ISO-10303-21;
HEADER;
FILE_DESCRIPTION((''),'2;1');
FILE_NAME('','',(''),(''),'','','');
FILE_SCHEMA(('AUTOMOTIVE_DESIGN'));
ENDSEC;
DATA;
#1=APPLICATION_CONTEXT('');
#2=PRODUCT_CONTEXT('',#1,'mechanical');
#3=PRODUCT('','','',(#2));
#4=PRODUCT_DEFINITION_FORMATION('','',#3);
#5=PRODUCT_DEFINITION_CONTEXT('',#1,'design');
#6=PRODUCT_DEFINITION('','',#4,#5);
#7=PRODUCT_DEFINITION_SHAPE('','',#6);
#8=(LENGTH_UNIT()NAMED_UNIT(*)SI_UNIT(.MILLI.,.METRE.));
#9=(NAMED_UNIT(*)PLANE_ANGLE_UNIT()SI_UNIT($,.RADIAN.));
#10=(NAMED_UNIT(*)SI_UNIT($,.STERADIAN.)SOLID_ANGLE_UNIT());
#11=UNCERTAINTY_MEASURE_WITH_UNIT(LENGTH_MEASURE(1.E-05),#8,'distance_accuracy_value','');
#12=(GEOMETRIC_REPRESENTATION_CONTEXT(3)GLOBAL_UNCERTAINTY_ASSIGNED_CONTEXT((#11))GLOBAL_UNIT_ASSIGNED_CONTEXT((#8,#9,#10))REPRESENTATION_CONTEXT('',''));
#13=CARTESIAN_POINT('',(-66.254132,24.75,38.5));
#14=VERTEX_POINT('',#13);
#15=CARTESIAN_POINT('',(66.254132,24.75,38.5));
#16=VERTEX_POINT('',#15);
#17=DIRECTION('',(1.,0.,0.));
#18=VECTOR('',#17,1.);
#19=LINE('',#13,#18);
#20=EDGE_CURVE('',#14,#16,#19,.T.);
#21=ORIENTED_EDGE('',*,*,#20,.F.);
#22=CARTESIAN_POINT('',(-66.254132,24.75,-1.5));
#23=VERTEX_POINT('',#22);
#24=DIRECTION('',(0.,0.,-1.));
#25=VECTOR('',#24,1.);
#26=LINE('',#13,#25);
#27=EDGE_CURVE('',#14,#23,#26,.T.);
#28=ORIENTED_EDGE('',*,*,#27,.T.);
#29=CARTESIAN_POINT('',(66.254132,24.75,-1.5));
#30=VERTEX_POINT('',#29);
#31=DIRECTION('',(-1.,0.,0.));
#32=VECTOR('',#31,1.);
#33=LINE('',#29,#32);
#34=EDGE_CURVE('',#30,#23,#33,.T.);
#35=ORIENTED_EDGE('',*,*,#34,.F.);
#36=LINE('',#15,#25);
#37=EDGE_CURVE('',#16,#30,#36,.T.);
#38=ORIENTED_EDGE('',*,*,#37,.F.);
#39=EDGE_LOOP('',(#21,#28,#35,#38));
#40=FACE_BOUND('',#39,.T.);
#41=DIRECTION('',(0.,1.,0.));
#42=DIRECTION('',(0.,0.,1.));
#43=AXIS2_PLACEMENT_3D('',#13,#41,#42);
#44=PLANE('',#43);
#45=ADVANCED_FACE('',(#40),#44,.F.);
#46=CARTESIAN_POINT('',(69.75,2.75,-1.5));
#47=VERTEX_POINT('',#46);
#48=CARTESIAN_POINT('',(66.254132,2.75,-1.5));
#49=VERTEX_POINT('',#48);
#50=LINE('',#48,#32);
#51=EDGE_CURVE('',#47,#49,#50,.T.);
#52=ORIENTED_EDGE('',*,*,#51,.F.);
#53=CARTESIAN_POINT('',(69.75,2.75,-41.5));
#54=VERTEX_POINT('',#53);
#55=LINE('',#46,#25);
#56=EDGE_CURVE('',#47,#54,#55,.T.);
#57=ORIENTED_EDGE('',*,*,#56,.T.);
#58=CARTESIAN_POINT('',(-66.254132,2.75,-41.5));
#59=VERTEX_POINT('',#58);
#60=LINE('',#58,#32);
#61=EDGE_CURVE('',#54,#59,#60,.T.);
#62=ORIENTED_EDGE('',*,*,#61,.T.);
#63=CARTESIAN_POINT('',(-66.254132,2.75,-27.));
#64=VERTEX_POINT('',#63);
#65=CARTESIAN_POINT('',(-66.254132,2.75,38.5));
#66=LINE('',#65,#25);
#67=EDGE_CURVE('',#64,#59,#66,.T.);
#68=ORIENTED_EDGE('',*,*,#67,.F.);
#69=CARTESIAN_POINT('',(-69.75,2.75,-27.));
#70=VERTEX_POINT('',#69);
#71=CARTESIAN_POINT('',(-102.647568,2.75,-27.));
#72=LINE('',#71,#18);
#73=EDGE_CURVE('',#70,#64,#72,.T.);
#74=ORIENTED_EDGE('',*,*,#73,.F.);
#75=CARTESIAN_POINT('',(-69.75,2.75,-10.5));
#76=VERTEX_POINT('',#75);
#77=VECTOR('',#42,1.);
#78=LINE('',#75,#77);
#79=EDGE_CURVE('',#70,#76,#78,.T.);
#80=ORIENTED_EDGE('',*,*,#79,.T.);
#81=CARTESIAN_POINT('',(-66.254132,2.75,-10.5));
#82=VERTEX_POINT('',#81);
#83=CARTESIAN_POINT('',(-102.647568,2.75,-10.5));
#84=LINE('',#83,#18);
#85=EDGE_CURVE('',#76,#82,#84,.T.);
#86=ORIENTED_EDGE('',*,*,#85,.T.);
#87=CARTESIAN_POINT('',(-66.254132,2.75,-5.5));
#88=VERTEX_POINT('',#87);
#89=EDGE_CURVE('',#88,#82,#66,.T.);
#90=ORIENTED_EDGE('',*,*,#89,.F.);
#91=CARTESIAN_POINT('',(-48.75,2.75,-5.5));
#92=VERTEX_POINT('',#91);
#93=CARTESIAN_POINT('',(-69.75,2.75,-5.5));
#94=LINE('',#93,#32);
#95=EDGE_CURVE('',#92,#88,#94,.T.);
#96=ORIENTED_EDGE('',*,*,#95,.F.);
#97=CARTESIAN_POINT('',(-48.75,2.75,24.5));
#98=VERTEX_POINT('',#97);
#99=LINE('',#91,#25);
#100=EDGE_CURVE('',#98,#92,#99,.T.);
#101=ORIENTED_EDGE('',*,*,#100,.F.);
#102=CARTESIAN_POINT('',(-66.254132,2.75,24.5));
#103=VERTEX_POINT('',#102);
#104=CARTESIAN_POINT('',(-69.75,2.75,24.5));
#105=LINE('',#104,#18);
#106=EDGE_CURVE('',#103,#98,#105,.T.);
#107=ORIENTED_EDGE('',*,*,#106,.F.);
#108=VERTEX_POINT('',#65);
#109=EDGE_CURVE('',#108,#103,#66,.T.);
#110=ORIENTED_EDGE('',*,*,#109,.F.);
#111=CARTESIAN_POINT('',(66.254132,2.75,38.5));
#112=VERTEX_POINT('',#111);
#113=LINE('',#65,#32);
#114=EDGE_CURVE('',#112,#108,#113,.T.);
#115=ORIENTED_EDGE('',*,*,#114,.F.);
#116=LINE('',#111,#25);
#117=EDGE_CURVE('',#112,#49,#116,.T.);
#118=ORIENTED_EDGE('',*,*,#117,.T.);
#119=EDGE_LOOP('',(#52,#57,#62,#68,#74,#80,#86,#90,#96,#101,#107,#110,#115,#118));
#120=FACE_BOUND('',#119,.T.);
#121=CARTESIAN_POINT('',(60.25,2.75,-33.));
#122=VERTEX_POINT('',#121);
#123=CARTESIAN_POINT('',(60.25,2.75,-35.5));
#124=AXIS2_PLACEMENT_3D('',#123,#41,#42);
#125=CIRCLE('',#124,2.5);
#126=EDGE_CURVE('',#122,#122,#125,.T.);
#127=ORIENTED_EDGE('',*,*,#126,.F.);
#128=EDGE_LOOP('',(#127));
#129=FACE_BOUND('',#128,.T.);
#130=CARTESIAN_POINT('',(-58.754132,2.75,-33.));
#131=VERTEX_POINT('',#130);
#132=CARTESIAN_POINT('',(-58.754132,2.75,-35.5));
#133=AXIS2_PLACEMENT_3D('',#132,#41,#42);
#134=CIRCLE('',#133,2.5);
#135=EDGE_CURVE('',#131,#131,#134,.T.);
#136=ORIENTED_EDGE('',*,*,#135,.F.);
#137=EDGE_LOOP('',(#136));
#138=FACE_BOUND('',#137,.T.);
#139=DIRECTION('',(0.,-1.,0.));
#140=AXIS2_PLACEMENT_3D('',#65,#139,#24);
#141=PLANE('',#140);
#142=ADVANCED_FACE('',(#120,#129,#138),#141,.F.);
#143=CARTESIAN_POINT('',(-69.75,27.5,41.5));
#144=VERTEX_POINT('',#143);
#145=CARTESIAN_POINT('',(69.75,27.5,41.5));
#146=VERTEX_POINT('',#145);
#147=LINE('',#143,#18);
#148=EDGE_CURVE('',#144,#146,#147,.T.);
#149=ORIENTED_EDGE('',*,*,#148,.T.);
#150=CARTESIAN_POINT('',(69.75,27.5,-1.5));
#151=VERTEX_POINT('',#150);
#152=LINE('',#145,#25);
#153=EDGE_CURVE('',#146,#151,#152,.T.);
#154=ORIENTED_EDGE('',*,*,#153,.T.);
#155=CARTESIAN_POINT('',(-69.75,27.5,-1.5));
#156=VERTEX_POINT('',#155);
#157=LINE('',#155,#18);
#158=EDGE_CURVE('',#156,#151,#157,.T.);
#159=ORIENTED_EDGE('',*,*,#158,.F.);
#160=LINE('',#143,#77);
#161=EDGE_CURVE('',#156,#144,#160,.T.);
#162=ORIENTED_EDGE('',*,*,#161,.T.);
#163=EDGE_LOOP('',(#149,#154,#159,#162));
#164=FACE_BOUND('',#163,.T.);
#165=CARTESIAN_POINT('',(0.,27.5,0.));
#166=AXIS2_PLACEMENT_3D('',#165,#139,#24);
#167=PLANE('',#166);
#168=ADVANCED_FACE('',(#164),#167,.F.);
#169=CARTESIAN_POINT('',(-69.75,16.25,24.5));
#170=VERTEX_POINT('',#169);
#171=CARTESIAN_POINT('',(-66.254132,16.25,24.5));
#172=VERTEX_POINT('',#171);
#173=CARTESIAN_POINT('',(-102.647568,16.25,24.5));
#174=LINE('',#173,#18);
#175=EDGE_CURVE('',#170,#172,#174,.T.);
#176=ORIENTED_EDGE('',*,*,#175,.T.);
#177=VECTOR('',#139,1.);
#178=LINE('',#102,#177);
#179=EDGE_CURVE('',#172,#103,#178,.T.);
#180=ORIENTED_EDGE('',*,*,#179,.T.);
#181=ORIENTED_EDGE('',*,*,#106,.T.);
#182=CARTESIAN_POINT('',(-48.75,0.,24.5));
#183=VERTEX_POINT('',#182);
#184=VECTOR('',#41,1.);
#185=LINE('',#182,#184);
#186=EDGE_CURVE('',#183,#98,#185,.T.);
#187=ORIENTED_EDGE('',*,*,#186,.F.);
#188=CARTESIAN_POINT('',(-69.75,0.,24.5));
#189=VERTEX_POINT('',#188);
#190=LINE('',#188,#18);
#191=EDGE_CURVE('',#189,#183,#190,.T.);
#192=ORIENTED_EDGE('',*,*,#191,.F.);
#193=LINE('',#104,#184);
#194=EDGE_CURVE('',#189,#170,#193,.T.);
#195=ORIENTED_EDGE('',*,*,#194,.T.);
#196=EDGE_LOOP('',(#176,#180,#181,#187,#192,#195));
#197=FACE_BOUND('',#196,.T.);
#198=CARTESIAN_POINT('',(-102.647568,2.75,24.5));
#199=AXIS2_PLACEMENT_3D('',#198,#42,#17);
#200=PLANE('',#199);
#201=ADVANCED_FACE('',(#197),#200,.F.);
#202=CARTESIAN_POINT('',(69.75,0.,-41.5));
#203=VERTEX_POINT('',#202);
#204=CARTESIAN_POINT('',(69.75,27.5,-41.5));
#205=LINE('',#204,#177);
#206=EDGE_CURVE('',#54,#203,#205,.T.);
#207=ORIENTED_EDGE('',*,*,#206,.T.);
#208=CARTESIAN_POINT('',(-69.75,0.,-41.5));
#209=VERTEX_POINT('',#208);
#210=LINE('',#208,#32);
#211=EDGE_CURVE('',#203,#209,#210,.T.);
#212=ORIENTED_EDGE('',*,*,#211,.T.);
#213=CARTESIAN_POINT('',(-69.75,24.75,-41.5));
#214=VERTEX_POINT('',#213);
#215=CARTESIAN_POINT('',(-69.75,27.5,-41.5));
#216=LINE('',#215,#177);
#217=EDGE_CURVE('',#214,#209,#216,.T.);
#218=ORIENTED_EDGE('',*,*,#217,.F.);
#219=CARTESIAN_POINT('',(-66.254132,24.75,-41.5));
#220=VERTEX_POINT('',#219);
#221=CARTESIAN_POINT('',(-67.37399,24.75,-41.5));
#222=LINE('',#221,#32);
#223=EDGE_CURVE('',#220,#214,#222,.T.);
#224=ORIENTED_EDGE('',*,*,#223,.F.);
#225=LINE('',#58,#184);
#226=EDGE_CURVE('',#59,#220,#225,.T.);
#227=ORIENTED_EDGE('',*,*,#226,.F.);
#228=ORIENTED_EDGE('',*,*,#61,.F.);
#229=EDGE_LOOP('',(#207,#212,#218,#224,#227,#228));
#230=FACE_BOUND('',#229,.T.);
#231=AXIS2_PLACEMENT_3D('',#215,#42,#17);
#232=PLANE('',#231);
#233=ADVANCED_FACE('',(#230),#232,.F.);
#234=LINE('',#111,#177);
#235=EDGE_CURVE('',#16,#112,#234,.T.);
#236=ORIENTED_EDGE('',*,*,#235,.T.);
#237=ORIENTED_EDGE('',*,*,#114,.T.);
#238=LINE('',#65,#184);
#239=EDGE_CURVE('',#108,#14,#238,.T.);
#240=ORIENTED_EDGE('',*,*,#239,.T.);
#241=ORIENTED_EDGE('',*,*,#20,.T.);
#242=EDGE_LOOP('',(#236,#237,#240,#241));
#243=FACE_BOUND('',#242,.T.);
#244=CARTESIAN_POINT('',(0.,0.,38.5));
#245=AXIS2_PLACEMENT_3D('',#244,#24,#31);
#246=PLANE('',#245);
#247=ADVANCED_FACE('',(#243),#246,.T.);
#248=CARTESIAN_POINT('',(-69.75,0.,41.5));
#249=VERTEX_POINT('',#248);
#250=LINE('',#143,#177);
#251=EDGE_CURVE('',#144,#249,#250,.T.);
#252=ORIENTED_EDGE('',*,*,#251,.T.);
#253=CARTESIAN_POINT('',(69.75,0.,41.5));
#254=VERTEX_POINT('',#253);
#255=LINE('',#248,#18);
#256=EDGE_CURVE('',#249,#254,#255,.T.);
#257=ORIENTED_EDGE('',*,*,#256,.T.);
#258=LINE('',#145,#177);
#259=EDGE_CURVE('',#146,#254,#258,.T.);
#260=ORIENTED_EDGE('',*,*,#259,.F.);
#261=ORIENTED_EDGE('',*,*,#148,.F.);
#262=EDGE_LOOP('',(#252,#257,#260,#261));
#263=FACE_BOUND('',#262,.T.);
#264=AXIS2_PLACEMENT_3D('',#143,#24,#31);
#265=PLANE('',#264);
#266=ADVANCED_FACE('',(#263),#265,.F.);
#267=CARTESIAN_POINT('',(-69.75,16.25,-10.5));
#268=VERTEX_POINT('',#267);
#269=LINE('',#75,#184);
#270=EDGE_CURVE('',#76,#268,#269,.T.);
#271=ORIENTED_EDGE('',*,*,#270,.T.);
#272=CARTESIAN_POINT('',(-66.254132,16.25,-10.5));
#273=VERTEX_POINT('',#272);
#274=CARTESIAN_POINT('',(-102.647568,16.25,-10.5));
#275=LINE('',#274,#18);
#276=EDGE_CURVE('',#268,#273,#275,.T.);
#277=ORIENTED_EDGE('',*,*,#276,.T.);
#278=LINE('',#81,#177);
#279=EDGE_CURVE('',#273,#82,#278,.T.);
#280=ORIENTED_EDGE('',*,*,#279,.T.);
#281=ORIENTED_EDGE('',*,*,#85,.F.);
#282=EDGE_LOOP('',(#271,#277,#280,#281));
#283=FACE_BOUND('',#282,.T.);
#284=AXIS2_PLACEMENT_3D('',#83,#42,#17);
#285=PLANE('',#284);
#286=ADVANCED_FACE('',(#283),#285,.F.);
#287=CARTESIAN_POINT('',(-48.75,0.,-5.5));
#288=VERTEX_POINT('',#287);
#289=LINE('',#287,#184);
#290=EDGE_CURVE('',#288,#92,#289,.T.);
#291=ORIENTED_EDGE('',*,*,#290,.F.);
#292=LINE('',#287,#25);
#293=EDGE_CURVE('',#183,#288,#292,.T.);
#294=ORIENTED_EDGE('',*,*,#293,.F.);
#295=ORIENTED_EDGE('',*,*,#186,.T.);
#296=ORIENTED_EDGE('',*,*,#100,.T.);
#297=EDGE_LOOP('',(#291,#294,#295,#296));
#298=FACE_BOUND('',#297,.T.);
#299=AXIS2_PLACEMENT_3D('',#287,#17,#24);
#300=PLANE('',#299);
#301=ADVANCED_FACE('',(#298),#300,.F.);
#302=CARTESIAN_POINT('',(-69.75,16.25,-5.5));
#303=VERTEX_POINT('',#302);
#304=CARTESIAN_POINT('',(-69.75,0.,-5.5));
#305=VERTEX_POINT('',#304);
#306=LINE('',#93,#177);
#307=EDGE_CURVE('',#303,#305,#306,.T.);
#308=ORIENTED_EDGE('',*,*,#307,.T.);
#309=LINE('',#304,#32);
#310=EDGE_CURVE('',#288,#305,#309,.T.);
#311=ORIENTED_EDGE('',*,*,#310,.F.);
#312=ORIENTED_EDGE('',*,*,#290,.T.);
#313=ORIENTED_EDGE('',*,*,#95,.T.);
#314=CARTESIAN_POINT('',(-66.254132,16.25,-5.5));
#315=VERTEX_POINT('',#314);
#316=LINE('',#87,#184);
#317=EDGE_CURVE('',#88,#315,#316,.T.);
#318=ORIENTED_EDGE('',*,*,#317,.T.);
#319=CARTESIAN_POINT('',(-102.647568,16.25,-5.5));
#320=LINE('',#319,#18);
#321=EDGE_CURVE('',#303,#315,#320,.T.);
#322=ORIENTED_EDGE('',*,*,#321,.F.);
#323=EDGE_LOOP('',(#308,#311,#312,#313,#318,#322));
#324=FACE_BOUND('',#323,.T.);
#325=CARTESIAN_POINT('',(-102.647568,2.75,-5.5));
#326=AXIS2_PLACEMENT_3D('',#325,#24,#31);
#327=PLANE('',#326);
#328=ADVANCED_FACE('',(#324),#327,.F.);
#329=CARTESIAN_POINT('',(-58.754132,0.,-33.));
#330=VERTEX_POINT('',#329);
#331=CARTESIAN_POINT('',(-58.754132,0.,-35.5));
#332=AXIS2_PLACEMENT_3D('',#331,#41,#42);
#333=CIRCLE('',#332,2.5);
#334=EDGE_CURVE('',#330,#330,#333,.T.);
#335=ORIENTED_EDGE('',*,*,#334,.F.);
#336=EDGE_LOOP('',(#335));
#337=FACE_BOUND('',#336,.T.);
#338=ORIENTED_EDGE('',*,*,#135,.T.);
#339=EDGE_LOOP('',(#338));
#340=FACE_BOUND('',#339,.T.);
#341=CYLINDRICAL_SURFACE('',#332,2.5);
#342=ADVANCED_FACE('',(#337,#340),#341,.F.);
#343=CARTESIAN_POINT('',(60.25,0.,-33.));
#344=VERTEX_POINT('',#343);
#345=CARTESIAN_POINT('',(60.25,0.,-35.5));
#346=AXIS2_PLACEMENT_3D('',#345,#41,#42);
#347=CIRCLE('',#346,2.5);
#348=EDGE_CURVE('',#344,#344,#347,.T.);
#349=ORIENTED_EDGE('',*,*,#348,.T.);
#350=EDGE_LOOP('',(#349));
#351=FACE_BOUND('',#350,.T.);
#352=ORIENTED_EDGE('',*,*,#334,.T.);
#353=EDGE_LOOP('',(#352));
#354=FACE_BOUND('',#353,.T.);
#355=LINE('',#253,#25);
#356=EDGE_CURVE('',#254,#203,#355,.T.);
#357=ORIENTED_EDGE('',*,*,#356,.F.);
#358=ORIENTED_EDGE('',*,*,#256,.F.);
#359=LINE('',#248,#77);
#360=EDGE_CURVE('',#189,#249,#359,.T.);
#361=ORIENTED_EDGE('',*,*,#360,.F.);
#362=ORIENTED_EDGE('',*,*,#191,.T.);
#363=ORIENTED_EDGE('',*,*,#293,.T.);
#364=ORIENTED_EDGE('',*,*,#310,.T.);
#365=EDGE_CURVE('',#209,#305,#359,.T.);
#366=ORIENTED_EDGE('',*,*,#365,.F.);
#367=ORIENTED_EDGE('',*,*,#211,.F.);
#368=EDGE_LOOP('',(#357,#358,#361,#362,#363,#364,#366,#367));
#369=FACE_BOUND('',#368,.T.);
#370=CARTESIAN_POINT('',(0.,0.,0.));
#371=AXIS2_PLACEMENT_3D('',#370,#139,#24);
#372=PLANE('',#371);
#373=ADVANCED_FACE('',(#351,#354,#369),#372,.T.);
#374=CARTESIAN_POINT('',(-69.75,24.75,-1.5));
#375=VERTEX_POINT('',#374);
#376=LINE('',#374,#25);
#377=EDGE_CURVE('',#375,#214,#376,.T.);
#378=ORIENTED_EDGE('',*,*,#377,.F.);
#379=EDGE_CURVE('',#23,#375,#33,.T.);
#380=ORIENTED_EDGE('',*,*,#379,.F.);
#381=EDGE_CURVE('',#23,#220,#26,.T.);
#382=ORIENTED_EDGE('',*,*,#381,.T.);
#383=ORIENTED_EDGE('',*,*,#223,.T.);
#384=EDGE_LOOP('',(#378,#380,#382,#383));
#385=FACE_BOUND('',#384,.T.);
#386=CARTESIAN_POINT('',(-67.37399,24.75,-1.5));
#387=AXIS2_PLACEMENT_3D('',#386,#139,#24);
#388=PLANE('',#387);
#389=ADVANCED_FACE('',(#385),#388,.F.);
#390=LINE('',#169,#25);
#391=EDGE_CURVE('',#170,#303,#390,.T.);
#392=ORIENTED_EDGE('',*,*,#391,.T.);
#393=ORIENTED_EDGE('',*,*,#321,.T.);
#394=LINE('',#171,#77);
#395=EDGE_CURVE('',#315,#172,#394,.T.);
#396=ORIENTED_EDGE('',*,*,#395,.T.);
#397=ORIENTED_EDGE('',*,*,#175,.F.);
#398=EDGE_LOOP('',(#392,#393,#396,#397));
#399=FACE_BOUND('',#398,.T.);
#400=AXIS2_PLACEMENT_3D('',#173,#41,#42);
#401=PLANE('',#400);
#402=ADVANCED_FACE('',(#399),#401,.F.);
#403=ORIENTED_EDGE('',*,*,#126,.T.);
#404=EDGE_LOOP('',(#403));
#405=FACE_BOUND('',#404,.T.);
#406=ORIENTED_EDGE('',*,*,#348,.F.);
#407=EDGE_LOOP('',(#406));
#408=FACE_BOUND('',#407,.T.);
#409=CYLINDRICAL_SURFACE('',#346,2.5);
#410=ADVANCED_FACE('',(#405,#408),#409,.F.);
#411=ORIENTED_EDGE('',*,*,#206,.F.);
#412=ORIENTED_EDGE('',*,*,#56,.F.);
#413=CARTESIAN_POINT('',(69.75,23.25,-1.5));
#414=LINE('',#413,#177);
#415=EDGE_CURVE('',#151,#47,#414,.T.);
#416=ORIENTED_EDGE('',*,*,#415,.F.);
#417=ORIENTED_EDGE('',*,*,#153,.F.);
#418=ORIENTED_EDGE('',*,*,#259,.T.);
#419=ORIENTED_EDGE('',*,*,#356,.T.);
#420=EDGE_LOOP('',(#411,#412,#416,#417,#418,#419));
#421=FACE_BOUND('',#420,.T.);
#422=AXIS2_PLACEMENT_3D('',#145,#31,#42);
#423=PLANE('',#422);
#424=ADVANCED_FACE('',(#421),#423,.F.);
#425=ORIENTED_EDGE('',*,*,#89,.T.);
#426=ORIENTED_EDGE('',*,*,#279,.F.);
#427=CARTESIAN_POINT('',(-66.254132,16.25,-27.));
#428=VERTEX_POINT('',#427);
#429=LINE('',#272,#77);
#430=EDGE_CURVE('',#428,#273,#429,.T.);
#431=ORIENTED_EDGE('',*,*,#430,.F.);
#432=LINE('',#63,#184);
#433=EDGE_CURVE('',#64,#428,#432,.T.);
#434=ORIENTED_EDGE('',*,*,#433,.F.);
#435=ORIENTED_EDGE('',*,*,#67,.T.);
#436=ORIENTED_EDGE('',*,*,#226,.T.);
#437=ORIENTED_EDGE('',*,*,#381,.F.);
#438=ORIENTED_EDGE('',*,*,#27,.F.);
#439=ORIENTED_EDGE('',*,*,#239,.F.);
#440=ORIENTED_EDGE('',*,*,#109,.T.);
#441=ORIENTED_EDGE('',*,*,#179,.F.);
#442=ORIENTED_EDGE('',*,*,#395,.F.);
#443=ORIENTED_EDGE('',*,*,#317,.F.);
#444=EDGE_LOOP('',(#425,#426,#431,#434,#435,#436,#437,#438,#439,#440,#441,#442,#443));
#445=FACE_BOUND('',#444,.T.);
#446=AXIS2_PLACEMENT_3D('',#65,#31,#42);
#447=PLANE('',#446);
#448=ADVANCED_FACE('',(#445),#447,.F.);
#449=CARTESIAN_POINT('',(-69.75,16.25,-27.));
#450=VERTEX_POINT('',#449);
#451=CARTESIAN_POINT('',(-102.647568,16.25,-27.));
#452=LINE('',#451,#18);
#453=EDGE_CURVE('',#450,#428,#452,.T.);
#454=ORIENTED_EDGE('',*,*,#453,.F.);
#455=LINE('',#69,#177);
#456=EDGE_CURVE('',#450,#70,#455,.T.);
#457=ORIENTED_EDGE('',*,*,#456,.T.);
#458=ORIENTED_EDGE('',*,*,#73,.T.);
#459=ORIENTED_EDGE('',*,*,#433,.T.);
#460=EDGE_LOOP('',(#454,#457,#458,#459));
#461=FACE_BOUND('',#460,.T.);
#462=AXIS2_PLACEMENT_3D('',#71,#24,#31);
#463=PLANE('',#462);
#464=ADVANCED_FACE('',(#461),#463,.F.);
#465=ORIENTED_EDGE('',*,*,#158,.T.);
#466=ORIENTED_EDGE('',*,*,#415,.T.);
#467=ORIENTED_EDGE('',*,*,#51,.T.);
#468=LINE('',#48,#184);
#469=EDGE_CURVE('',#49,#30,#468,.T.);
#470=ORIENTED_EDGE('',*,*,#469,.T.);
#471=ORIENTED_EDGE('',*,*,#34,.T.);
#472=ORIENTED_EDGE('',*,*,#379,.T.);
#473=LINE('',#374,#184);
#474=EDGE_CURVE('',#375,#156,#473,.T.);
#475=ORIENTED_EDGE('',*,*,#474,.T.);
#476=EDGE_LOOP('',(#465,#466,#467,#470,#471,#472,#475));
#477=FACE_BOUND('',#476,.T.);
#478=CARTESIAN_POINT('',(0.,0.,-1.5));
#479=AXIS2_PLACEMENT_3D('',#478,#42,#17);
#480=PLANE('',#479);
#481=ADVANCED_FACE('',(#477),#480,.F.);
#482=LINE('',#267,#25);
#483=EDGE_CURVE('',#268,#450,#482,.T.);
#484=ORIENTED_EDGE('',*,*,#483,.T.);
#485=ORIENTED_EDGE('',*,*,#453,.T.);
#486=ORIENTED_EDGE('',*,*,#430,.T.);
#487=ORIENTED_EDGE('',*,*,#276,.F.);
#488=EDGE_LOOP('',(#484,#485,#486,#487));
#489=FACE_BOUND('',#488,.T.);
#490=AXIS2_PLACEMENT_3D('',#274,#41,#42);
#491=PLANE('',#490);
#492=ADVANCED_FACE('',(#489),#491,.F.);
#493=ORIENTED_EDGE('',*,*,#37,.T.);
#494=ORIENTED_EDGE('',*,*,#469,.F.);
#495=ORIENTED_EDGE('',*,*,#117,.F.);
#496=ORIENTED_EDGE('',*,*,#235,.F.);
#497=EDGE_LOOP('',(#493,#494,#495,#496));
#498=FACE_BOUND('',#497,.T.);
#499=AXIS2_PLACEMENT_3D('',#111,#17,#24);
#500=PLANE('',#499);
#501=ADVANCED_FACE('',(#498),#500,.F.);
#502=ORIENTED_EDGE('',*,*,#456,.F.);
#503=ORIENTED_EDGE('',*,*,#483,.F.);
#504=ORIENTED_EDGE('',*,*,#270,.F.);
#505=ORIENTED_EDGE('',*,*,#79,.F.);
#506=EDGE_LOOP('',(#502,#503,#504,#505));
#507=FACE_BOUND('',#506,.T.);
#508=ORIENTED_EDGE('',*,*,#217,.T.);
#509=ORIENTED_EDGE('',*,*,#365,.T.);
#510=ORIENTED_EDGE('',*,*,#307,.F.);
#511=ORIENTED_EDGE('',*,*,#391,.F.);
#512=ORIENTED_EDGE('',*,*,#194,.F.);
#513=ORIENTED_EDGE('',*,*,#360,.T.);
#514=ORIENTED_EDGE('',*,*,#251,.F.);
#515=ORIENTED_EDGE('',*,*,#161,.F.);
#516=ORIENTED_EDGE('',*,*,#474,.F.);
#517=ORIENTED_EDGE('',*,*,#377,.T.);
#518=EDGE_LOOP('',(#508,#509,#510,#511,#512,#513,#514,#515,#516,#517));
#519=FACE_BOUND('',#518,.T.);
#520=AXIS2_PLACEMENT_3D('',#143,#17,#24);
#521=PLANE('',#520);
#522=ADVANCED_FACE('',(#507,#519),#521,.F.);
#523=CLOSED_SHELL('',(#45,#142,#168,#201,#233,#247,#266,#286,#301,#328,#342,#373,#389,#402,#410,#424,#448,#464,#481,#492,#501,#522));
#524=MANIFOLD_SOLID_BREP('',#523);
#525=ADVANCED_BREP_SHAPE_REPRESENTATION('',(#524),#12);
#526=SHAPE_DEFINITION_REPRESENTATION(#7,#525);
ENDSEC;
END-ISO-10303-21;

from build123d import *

# Parameters (mm, degrees)
CROQUIS1_W                = 139.5
CROQUIS1_H                = 83
SALIENTE_EXTRUIR1_DEPTH   = 27.5
CORTAR_EXTRUIR1_START     = -66.254131909
CORTAR_EXTRUIR1_OUTLINE_W = 22
CORTAR_EXTRUIR1_OUTLINE_H = 80
CORTAR_EXTRUIR1_DEPTH     = 132.508263818
CORTAR_EXTRUIR2_DEPTH     = 40
CROQUIS6_W                = 30
CROQUIS6_H                = 13.5
CROQUIS6_W_2              = 16.5
CORTAR_EXTRUIR3_DEPTH     = 3.495868091
CROQUIS7_R                = 2.5
CROQUIS7_W                = 21
CROQUIS7_H                = 30
CORTAR_EXTRUIR4_DEPTH     = 85.85207717


# Read off the part's stored shape, not the designer's step: Cortar-Extruir1
with BuildPart() as part:
    # Croquis1 → Saliente-Extruir1 (new body)
    with BuildSketch(Plane(origin=(0, 0, 0), x_dir=(1, 0, 0), z_dir=(0, 1, 0))):
        Rectangle(CROQUIS1_W, CROQUIS1_H)
    extrude(amount=SALIENTE_EXTRUIR1_DEPTH)

    # Cortar-Extruir1 outline → Cortar-Extruir1 (cut)
    with BuildSketch(Plane.YZ.offset(CORTAR_EXTRUIR1_START)):
        with Locations((13.75, -1.5)):
            Rectangle(CORTAR_EXTRUIR1_OUTLINE_W, CORTAR_EXTRUIR1_OUTLINE_H)
    extrude(amount=CORTAR_EXTRUIR1_DEPTH, mode=Mode.SUBTRACT)

    # Croquis3 → Cortar-Extruir2 (cut)
    with BuildSketch(Plane(origin=(0, 0, -41.5), x_dir=(-1, 0, 0), z_dir=(0, 0, -1))):
        Polygon((-66.254131909, 24.75), (67.373989774, 24.75), (69.75, 24.75), (69.75, 27.5), (67.373989774, 27.5), (-64.5, 27.5), (-69.75, 27.5), (-69.75, 23.25), (-69.75, 2.75), (-66.254131909, 2.75), align=None)
    extrude(amount=-CORTAR_EXTRUIR2_DEPTH, mode=Mode.SUBTRACT)

    # Croquis6 → Cortar-Extruir3 (cut)
    with BuildSketch(Plane(origin=(-66.254131909, 0, 0), x_dir=(0, 0, -1), z_dir=(1, 0, 0))):
        with Locations((-9.5, 9.5)):
            Rectangle(CROQUIS6_W, CROQUIS6_H)
        with Locations((18.75, 9.5)):
            Rectangle(CROQUIS6_W_2, CROQUIS6_H)
    extrude(amount=-CORTAR_EXTRUIR3_DEPTH, mode=Mode.SUBTRACT)

    # Croquis7 → Cortar-Extruir4 (cut, through all)
    with BuildSketch(Plane(origin=(0, 2.75, 0), x_dir=(1, 0, 0), z_dir=(0, 1, 0))):
        with Locations(Location((-58.754131909, 35.5, 0), (0, 0, 270))):
            Circle(CROQUIS7_R)
        with Locations(Location((60.25, 35.5, 0), (0, 0, 270))):
            Circle(CROQUIS7_R)
        with Locations((-59.25, -9.5)):
            Rectangle(CROQUIS7_W, CROQUIS7_H)
    extrude(amount=-CORTAR_EXTRUIR4_DEPTH, mode=Mode.SUBTRACT)


solid = part.part
